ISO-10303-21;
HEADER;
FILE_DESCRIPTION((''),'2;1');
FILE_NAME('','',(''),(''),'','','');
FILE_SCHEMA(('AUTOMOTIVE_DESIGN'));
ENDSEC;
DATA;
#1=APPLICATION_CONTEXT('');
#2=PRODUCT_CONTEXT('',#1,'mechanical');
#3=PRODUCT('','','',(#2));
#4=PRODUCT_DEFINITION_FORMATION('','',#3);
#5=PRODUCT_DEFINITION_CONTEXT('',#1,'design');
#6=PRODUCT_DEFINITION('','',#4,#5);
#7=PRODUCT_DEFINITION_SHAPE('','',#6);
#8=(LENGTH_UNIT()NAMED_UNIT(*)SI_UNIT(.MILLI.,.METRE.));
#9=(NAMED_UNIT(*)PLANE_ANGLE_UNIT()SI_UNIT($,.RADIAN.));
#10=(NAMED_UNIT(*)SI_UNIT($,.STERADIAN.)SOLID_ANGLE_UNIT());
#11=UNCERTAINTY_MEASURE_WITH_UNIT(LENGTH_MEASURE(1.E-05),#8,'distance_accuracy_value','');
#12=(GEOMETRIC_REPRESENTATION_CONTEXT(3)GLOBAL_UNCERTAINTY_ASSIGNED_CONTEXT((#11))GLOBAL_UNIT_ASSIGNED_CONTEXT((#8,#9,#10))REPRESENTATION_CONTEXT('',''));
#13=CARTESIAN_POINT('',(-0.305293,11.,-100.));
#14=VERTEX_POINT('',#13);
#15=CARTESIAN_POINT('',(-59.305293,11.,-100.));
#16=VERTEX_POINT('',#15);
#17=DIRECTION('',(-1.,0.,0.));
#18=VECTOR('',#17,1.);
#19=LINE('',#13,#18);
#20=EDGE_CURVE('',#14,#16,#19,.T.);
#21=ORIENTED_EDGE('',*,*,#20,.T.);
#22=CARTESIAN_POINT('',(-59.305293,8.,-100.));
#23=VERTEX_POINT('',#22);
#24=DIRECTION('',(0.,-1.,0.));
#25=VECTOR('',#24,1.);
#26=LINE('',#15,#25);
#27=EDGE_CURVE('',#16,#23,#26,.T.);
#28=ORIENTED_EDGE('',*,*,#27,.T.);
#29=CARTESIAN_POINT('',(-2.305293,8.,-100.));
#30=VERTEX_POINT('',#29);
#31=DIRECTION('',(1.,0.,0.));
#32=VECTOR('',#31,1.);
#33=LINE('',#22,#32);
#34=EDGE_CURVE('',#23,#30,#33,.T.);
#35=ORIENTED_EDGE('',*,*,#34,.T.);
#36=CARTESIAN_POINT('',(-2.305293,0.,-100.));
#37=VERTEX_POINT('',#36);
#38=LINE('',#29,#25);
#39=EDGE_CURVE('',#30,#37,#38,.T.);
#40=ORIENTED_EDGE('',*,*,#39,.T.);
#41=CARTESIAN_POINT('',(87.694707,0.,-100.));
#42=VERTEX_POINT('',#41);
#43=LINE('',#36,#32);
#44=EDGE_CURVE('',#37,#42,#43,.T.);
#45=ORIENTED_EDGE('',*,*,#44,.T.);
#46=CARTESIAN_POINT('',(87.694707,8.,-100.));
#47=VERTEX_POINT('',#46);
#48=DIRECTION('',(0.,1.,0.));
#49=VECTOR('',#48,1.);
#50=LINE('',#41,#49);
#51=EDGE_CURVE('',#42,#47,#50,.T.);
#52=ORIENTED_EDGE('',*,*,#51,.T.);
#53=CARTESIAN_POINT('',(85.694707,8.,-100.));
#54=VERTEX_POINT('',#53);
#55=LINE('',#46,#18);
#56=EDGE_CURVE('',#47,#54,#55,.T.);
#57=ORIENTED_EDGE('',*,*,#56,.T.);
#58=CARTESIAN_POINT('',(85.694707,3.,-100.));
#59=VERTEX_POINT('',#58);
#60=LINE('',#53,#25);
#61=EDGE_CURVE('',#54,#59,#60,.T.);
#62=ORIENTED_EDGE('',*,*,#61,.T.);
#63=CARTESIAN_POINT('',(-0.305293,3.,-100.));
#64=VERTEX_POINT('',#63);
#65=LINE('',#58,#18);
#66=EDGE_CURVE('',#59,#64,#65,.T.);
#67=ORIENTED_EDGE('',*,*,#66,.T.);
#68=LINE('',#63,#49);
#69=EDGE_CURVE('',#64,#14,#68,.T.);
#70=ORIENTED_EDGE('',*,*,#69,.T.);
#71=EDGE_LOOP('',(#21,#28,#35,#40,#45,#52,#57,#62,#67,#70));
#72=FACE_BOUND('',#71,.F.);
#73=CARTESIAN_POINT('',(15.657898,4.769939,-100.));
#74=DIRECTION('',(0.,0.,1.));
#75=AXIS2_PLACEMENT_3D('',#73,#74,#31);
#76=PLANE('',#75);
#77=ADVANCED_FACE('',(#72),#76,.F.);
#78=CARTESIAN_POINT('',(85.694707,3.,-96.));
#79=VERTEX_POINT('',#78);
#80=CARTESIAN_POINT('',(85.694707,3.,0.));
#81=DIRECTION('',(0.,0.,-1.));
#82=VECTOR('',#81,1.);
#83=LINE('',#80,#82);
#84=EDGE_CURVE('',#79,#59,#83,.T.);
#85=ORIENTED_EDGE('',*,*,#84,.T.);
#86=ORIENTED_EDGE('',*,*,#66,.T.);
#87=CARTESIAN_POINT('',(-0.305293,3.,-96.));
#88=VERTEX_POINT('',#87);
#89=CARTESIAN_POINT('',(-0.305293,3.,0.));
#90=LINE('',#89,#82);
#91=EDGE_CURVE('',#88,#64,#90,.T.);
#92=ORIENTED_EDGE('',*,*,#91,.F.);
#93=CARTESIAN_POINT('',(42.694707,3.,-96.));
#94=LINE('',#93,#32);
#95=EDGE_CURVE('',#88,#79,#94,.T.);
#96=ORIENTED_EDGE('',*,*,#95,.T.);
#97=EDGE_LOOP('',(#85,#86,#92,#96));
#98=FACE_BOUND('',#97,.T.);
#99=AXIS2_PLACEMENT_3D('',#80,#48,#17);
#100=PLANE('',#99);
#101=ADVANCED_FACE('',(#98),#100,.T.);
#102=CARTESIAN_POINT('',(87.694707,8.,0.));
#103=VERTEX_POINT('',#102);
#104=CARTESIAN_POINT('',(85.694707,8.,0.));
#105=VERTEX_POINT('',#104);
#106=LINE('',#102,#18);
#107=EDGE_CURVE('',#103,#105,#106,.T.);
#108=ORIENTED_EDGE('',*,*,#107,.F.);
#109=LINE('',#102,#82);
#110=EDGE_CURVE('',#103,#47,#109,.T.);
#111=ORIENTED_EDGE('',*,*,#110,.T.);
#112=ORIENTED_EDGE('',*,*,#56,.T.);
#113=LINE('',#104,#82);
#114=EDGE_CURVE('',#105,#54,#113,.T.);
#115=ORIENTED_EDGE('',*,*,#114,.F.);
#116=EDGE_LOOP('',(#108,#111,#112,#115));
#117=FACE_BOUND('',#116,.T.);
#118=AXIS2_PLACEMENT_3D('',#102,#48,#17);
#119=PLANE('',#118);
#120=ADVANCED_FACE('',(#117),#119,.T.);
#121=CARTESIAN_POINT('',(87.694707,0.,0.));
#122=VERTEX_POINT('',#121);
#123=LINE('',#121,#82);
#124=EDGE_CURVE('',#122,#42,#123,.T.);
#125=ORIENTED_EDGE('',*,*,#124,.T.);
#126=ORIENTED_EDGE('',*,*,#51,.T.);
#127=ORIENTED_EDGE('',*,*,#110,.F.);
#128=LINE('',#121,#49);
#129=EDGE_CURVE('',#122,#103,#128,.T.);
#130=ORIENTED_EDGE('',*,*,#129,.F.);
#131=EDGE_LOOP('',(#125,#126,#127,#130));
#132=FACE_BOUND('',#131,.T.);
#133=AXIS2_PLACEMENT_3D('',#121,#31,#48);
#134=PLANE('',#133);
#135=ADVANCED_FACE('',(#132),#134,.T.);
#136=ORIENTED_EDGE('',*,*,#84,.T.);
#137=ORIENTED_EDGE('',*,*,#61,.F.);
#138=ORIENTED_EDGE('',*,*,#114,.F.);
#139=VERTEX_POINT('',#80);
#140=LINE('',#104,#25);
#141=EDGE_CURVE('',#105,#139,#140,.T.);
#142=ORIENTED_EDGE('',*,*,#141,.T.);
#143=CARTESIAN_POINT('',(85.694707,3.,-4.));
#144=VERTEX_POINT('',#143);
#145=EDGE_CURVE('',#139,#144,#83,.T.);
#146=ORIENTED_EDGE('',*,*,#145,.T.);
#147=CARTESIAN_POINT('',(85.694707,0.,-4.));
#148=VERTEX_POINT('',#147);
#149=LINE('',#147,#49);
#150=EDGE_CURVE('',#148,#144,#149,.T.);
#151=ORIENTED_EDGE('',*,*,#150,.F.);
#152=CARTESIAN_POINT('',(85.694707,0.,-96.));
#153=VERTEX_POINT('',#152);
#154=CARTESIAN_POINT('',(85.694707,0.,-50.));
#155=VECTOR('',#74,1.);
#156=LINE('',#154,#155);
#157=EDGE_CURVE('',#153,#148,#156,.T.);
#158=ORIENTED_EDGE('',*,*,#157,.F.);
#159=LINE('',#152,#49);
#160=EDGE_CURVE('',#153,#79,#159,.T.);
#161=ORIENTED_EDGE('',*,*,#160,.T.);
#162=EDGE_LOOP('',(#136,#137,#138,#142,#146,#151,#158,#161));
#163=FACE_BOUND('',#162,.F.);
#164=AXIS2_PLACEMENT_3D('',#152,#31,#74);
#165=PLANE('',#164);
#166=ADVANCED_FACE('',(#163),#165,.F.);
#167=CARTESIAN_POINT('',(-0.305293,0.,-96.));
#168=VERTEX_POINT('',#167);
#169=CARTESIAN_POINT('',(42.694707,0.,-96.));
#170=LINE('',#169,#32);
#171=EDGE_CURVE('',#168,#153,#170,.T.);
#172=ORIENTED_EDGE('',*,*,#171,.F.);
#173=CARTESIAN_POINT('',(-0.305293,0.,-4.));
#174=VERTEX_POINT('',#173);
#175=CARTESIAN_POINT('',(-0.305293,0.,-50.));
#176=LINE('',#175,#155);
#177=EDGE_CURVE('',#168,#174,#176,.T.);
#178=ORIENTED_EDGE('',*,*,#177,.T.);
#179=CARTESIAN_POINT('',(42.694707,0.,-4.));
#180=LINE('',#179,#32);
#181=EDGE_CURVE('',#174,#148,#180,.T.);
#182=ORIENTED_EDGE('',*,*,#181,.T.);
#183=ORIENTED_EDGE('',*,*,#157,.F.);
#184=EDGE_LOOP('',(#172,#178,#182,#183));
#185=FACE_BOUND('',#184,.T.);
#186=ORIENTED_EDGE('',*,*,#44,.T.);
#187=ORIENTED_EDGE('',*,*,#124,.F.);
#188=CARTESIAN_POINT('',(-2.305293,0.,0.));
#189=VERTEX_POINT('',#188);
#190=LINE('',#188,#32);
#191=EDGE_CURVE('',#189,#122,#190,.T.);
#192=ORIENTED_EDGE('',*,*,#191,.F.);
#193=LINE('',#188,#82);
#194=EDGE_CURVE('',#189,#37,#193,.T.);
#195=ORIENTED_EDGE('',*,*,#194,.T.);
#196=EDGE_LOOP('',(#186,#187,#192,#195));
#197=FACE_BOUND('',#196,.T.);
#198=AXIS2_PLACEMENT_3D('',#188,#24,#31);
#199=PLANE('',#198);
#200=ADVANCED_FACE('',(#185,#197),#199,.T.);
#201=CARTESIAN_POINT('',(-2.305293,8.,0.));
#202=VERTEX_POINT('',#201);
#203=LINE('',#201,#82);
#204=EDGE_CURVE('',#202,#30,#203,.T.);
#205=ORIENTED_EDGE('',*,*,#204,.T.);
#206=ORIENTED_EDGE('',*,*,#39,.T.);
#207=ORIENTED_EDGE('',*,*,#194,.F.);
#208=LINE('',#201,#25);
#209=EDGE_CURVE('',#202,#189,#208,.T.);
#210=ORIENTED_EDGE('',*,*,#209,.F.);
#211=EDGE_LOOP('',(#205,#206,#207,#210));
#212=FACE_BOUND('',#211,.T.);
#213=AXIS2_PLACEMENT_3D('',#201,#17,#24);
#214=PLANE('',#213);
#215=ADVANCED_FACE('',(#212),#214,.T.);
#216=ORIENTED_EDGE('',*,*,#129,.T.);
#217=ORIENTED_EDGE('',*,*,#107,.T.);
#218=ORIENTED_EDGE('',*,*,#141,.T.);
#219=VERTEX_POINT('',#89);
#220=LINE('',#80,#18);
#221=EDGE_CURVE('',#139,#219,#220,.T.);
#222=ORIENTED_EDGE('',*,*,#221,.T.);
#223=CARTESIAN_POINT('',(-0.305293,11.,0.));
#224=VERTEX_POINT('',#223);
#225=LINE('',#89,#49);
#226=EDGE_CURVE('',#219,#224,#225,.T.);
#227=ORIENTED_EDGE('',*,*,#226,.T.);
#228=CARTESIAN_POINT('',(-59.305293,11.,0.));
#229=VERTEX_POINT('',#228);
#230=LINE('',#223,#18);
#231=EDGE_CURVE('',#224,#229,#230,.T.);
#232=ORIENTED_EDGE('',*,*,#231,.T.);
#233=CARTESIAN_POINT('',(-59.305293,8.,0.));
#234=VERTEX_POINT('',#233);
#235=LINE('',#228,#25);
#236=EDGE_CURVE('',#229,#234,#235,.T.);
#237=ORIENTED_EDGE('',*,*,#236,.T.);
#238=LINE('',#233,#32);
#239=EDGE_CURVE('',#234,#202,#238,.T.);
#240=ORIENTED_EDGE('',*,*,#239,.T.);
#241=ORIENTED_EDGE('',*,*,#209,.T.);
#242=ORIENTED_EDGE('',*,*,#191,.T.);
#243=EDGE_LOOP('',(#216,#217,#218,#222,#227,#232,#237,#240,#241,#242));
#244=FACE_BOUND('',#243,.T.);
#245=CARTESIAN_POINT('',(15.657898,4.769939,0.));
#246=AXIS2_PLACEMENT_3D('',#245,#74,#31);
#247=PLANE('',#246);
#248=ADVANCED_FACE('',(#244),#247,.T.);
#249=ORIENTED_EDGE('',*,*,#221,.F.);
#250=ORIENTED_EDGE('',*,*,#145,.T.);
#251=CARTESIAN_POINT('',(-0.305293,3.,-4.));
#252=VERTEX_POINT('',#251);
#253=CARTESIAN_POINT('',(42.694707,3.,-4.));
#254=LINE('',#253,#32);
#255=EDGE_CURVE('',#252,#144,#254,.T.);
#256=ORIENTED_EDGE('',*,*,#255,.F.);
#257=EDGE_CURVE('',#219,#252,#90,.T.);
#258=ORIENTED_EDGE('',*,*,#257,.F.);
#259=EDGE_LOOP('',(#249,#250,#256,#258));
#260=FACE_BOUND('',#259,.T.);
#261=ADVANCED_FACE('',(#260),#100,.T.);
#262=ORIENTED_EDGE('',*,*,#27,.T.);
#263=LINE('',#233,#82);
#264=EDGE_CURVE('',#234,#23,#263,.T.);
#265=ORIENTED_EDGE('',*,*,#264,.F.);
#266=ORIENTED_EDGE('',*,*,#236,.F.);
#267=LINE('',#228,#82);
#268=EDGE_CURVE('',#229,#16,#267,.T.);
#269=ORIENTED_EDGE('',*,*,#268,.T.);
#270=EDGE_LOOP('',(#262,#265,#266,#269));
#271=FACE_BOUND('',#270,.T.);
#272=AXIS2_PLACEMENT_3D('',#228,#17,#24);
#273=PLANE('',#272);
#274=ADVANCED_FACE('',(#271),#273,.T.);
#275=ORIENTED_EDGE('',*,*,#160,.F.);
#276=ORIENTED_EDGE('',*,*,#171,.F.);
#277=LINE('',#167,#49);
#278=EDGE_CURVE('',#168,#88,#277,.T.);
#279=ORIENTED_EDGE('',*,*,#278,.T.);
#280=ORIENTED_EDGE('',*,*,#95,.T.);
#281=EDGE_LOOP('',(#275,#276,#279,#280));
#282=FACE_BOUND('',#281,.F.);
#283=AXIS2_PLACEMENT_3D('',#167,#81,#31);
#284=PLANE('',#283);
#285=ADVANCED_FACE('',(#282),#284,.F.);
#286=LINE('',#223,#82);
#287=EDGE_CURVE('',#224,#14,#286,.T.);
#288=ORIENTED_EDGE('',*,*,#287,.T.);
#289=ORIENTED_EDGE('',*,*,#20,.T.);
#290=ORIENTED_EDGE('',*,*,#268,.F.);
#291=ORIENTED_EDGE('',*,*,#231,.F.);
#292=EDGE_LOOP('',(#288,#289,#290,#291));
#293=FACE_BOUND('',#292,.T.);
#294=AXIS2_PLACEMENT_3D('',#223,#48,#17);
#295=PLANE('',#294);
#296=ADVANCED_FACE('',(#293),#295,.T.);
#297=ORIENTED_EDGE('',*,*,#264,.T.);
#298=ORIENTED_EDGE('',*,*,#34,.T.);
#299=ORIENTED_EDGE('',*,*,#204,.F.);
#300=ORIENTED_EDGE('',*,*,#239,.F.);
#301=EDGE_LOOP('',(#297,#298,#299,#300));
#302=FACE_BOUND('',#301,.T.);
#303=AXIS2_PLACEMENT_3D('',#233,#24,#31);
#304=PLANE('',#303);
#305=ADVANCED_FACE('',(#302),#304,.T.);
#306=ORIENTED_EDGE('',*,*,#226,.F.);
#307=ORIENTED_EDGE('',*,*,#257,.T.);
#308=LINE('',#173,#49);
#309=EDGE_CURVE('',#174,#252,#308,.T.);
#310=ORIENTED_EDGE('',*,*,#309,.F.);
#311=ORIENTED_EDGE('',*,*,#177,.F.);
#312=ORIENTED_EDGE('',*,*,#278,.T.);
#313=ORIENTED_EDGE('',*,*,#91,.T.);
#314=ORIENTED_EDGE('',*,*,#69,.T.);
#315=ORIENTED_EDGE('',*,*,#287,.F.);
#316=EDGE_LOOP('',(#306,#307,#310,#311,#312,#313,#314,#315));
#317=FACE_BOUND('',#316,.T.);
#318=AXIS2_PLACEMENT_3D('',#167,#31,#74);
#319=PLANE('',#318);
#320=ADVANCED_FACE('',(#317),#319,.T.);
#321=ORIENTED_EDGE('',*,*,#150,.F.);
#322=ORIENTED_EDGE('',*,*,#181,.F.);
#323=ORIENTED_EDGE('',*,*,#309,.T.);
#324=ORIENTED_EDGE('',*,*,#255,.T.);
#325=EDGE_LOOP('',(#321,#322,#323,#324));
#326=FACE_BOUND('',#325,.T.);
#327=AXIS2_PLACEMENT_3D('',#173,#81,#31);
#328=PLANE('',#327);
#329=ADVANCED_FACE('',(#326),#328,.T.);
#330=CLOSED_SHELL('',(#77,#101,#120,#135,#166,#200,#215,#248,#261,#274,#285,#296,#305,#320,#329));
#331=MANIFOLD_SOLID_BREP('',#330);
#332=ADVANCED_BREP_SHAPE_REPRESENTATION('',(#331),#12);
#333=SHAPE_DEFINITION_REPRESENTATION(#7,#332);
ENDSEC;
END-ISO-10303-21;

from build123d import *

# Parameters (mm, degrees)
F2_DEPTH = 100
F3_W     = 86
F3_H     = 92
F4_DEPTH = 3


# Not quite as in the source:
# - the program builds the solid bodies; features that only make, move or delete a surface that nothing else refers to are left out


with BuildPart() as f2:
    # F0 (on Top) → F2 (new body)
    with BuildSketch(Plane.XY):
        Polygon((-2.3052925244, 0), (87.6947074756, 0), (87.6947074756, 8), (85.6947074756, 8), (85.6947074756, 3), (-0.3052925244, 3), (-0.3052925244, 11), (-59.3052925244, 11), (-59.3052925244, 8), (-2.3052925244, 8), (-2.3052925244, 3), align=None)
    extrude(amount=-F2_DEPTH)

    # F3 (on Front) → F4 (cut)
    with BuildSketch(Plane.XZ):
        with Locations((42.6947074756, -50)):
            Rectangle(F3_W, F3_H)
    extrude(amount=-F4_DEPTH, mode=Mode.SUBTRACT)


solid = f2.part
